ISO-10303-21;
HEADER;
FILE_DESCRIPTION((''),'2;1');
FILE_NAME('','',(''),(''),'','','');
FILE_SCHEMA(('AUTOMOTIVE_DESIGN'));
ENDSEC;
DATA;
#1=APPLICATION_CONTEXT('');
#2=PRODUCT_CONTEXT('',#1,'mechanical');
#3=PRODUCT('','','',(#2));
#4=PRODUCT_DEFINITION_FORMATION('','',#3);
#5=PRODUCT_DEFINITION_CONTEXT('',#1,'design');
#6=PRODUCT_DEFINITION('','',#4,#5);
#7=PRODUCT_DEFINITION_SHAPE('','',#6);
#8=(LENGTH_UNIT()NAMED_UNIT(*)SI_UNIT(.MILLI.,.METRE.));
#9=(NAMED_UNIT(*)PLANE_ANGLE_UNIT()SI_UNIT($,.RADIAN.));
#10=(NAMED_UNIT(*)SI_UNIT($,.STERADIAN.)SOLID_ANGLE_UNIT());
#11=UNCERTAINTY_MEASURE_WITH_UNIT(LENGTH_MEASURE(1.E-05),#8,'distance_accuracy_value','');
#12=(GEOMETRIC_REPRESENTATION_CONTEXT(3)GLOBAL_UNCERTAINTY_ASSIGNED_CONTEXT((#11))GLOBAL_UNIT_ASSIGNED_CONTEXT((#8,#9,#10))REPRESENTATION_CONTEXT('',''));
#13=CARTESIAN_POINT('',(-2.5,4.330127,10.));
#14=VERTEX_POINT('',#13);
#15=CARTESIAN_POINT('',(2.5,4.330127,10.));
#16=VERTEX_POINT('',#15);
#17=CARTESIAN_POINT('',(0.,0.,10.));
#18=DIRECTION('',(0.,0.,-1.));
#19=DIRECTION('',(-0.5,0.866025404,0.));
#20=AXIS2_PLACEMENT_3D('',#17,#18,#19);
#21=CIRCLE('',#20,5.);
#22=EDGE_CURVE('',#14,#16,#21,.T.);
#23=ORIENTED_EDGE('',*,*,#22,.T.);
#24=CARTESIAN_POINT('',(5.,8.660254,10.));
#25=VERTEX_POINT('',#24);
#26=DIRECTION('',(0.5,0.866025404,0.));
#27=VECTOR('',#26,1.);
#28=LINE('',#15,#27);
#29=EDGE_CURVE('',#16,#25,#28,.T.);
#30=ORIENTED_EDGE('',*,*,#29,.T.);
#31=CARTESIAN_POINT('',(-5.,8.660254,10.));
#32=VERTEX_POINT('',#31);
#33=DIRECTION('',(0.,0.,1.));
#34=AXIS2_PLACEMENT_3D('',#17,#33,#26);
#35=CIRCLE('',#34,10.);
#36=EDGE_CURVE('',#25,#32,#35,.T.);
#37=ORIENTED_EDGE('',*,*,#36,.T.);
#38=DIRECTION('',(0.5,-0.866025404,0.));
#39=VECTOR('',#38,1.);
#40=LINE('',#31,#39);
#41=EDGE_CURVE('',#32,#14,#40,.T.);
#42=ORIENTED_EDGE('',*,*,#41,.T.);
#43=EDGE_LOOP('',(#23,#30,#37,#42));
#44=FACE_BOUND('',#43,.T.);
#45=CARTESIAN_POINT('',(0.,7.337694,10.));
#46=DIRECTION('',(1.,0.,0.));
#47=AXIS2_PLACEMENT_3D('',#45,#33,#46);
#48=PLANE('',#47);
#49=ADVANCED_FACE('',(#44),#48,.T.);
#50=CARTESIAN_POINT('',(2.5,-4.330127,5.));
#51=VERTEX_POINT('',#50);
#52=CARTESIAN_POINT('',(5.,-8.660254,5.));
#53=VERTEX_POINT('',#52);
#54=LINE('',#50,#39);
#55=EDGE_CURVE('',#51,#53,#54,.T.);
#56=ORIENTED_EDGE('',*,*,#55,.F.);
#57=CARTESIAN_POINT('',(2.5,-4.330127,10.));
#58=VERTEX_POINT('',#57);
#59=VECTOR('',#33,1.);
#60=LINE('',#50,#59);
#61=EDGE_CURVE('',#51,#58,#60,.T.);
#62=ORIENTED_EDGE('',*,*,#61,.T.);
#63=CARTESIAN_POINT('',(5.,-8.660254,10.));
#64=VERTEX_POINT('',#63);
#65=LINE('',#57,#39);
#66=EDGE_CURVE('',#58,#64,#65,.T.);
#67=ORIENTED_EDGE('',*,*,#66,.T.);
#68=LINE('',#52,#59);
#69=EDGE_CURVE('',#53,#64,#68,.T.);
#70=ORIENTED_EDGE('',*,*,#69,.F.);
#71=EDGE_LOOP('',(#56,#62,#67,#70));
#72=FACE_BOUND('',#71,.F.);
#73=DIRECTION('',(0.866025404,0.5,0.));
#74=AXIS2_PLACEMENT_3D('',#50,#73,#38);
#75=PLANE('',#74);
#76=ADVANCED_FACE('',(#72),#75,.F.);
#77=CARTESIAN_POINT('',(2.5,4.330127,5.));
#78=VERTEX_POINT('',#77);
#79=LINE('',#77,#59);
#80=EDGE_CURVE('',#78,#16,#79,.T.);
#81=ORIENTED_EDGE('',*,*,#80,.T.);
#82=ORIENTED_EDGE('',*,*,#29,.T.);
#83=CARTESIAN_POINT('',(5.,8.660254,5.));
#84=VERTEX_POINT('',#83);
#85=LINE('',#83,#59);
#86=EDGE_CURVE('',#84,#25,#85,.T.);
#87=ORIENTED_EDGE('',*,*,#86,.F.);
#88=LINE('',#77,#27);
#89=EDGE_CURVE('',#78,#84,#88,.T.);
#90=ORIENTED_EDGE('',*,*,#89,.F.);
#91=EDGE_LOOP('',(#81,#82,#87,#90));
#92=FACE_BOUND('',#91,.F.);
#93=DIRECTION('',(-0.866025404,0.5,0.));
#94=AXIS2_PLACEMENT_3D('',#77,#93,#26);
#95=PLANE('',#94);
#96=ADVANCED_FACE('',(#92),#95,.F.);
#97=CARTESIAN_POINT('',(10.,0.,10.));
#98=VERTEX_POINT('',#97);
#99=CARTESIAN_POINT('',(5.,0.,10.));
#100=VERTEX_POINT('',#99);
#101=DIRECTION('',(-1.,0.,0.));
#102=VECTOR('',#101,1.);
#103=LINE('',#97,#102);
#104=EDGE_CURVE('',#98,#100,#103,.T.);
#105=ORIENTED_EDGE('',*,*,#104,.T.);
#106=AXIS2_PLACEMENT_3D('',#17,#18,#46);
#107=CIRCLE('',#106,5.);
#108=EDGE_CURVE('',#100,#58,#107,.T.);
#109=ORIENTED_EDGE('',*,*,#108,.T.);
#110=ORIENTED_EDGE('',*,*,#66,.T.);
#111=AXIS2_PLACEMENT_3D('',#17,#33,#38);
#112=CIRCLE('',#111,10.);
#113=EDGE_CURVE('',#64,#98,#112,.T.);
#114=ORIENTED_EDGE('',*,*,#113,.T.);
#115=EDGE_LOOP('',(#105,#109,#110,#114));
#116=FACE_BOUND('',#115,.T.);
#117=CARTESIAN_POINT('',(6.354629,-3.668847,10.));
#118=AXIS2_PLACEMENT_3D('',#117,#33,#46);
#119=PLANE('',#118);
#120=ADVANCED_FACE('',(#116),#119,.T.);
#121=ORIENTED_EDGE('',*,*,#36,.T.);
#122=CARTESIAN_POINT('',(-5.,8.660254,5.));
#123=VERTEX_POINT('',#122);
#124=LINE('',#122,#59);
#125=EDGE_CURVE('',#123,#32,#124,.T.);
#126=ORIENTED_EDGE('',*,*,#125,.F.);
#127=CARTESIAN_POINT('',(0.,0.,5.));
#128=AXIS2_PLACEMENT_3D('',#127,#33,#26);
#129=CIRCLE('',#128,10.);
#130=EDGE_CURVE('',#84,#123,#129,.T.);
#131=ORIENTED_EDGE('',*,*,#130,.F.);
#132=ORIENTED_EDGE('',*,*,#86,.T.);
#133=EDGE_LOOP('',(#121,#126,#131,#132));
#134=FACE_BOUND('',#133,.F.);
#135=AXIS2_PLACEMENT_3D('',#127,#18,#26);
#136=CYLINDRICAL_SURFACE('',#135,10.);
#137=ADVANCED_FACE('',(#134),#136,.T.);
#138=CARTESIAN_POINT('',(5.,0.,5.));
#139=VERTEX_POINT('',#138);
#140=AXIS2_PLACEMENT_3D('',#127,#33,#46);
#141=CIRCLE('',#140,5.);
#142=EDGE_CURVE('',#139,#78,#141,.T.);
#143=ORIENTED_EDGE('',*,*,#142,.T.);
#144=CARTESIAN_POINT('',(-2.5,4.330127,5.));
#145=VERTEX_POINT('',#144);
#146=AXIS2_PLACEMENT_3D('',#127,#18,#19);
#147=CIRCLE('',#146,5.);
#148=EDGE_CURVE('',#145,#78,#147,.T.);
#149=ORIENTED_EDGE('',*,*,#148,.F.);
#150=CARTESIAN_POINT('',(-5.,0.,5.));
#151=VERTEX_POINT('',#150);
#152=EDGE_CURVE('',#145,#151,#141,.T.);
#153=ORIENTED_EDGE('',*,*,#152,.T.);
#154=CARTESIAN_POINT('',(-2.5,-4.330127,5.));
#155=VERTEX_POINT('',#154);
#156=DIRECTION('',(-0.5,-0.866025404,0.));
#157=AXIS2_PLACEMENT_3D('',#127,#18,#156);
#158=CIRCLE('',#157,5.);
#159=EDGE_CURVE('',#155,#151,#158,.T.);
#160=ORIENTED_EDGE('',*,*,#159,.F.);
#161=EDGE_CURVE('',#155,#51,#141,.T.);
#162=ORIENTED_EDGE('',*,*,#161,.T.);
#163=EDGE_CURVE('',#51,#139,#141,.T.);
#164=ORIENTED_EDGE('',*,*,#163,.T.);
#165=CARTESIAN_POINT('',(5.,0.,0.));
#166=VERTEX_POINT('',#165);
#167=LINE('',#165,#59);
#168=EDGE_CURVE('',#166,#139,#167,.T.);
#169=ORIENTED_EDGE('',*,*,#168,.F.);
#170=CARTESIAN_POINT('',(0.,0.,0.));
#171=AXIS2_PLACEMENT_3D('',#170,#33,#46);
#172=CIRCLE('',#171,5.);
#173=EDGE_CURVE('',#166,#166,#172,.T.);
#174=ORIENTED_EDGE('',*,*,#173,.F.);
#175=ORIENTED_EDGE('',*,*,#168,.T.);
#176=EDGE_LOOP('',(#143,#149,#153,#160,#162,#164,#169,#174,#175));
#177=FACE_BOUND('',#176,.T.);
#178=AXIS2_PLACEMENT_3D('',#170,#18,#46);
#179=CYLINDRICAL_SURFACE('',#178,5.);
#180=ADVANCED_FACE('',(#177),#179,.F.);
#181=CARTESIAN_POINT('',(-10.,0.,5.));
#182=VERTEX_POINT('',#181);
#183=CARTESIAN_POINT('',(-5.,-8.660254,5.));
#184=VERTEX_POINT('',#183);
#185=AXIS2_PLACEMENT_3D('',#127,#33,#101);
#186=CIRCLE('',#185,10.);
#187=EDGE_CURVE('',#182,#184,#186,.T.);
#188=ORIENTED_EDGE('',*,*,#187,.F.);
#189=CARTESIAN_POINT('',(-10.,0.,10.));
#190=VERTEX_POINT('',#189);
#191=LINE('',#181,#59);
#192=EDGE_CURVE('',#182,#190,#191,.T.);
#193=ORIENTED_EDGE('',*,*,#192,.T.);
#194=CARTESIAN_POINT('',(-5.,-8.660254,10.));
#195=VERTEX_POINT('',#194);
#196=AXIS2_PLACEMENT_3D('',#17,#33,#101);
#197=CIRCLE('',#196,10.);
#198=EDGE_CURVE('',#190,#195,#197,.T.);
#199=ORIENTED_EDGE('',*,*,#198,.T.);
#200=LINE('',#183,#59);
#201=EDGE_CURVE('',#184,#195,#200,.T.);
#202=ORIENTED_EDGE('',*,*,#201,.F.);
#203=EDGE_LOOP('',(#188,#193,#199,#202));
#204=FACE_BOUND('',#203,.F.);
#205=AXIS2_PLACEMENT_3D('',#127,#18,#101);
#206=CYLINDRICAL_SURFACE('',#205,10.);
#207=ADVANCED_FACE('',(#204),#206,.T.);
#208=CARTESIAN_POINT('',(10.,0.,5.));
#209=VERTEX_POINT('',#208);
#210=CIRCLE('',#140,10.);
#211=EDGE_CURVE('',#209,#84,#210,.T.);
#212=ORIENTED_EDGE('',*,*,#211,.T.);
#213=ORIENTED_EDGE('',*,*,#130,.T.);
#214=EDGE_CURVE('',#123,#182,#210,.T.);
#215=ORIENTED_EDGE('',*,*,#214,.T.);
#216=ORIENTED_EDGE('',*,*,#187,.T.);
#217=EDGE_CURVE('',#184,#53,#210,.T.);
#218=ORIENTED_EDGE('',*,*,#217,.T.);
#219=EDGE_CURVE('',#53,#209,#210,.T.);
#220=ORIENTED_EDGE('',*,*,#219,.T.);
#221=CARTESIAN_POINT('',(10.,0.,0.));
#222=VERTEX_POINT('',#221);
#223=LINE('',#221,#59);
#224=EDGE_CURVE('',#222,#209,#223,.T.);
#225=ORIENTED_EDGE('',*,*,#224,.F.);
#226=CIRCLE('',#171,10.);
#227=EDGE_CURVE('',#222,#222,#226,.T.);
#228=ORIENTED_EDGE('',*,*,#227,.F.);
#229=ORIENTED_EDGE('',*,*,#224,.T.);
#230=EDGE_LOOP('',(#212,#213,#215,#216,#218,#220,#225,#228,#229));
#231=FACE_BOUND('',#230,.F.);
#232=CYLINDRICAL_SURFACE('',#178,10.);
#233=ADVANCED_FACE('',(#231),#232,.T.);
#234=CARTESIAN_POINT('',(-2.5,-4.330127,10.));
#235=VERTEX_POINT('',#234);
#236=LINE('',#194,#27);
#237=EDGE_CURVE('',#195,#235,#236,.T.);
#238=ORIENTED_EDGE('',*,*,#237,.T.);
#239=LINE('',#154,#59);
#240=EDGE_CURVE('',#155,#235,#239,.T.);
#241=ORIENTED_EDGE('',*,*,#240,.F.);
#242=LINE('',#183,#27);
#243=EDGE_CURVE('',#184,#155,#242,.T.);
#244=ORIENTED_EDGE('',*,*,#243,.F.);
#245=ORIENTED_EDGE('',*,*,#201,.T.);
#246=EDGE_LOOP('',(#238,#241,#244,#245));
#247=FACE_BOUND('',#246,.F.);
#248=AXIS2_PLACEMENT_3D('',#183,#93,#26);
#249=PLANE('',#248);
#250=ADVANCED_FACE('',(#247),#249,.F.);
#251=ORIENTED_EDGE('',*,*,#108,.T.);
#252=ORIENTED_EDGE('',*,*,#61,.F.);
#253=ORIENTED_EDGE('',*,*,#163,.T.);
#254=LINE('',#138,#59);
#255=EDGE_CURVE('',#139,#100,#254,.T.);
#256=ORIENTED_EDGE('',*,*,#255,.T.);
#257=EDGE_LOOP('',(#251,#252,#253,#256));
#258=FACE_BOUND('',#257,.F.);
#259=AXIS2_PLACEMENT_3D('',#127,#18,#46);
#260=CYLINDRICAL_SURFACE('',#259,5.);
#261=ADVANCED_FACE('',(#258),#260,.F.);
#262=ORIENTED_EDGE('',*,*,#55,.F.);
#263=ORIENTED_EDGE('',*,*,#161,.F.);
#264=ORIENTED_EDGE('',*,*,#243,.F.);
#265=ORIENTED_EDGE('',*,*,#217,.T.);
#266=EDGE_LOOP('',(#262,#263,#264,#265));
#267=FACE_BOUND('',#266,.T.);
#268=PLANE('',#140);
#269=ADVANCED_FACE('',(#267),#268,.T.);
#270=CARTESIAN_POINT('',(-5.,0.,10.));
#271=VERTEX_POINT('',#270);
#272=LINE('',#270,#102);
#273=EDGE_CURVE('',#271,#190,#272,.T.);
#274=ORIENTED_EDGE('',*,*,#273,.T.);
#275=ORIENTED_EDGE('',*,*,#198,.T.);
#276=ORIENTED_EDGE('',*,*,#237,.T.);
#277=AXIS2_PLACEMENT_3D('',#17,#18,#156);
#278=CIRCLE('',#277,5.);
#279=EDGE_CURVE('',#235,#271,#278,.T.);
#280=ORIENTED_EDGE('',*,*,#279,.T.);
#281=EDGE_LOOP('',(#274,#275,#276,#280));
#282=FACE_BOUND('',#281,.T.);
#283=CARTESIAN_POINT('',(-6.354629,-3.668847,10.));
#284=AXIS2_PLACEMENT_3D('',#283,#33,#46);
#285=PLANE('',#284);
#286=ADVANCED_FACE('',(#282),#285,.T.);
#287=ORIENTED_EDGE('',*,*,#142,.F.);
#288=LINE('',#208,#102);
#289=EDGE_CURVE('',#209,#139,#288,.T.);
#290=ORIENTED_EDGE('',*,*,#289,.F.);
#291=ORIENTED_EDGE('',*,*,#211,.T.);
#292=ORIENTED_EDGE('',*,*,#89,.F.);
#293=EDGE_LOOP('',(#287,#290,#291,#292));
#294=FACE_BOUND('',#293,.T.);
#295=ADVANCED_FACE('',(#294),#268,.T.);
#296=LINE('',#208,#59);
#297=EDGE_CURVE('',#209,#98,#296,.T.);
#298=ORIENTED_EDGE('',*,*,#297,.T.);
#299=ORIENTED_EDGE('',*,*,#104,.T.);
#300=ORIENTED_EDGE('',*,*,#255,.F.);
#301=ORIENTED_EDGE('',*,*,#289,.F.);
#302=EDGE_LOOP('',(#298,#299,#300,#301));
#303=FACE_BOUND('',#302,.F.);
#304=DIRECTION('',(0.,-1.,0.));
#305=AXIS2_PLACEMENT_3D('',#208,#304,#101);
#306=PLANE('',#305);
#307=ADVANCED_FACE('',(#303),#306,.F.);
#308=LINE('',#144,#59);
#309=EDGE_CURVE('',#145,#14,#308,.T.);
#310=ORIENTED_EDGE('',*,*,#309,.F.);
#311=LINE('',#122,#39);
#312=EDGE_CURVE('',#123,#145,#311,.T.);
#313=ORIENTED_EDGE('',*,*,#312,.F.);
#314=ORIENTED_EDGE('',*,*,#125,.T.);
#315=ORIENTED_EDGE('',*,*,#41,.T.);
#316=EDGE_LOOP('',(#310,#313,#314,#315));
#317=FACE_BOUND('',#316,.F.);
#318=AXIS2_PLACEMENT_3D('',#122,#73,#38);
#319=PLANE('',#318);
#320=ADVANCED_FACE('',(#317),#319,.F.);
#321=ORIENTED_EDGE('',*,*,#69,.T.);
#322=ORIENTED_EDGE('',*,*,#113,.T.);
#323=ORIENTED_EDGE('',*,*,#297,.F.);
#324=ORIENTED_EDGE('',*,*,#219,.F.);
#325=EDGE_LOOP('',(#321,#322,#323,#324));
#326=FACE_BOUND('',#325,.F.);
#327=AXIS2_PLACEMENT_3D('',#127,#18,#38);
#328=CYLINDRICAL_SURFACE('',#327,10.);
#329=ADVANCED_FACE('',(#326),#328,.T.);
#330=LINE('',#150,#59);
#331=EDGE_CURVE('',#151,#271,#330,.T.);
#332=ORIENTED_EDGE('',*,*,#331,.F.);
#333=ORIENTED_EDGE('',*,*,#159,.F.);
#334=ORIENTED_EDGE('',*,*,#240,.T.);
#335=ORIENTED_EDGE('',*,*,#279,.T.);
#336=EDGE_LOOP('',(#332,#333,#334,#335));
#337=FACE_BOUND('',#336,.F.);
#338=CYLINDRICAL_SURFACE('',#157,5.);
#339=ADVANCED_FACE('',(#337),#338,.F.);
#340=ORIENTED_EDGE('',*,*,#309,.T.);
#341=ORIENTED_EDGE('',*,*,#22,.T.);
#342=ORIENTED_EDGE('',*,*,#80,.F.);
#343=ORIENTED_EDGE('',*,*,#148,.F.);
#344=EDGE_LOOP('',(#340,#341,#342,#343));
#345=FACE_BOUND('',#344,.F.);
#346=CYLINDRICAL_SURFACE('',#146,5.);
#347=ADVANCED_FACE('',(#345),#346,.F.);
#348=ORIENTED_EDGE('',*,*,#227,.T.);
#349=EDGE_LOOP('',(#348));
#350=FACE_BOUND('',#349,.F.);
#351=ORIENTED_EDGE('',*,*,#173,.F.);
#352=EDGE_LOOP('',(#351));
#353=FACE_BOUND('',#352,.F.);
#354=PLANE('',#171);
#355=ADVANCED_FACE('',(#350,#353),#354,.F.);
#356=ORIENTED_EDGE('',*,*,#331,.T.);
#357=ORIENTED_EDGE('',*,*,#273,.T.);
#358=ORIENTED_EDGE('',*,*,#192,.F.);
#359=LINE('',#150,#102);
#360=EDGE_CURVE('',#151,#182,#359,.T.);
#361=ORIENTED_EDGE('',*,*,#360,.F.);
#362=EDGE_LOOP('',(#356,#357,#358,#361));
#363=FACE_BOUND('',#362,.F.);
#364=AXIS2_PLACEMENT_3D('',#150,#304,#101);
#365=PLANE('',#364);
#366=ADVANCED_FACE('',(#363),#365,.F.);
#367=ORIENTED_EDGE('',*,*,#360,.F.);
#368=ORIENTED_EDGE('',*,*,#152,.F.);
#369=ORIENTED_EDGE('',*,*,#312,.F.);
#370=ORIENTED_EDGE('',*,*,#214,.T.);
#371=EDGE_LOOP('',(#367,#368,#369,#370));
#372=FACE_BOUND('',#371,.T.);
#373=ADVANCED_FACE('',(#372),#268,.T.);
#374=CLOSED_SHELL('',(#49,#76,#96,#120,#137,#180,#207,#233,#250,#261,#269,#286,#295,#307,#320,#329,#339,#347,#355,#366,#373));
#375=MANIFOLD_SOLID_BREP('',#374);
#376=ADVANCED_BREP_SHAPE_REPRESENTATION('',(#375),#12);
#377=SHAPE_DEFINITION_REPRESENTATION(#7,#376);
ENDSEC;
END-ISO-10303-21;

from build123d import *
from build123d import SkipClean  # not in build123d's __all__

# Parameters (mm, degrees)
F0_R     = 10
F0_R_2   = 5
F1_DEPTH = 5
F3_DEPTH = 5


with BuildPart() as f1:
    # F0 (on Top) → F1 (new body)
    with BuildSketch(Plane.XY):
        Circle(F0_R)
        Circle(F0_R_2, mode=Mode.SUBTRACT)
    extrude(amount=F1_DEPTH)

    # F2 (on face) → F3 (join)
    with BuildSketch(Plane.XY.offset(5)):
        with BuildLine():
            ThreePointArc((-2.5, -4.3301270189), (-4.3301270189, -2.5), (-5, 0))
            Line((-5, 0), (-10, 0))
            ThreePointArc((-10, 0), (-8.6602540378, -5), (-5, -8.6602540378))
            Line((-5, -8.6602540378), (-2.5, -4.3301270189))
        make_face()
        with BuildLine():
            ThreePointArc((5, 0), (4.3301270189, -2.5), (2.5, -4.3301270189))
            Line((2.5, -4.3301270189), (5, -8.6602540378))
            ThreePointArc((5, -8.6602540378), (8.6602540378, -5), (10, 0))
            Line((10, 0), (5, 0))
        make_face()
        with BuildLine():
            ThreePointArc((-2.5, 4.3301270189), (0, 5), (2.5, 4.3301270189))
            Line((2.5, 4.3301270189), (5, 8.6602540378))
            ThreePointArc((5, 8.6602540378), (0, 10), (-5, 8.6602540378))
            Line((-5, 8.6602540378), (-2.5, 4.3301270189))
        make_face()
    with SkipClean():  # cleaning this boolean's faces spoils the solid; the shape is the same uncleaned
        extrude(amount=F3_DEPTH)


solid = f1.part
